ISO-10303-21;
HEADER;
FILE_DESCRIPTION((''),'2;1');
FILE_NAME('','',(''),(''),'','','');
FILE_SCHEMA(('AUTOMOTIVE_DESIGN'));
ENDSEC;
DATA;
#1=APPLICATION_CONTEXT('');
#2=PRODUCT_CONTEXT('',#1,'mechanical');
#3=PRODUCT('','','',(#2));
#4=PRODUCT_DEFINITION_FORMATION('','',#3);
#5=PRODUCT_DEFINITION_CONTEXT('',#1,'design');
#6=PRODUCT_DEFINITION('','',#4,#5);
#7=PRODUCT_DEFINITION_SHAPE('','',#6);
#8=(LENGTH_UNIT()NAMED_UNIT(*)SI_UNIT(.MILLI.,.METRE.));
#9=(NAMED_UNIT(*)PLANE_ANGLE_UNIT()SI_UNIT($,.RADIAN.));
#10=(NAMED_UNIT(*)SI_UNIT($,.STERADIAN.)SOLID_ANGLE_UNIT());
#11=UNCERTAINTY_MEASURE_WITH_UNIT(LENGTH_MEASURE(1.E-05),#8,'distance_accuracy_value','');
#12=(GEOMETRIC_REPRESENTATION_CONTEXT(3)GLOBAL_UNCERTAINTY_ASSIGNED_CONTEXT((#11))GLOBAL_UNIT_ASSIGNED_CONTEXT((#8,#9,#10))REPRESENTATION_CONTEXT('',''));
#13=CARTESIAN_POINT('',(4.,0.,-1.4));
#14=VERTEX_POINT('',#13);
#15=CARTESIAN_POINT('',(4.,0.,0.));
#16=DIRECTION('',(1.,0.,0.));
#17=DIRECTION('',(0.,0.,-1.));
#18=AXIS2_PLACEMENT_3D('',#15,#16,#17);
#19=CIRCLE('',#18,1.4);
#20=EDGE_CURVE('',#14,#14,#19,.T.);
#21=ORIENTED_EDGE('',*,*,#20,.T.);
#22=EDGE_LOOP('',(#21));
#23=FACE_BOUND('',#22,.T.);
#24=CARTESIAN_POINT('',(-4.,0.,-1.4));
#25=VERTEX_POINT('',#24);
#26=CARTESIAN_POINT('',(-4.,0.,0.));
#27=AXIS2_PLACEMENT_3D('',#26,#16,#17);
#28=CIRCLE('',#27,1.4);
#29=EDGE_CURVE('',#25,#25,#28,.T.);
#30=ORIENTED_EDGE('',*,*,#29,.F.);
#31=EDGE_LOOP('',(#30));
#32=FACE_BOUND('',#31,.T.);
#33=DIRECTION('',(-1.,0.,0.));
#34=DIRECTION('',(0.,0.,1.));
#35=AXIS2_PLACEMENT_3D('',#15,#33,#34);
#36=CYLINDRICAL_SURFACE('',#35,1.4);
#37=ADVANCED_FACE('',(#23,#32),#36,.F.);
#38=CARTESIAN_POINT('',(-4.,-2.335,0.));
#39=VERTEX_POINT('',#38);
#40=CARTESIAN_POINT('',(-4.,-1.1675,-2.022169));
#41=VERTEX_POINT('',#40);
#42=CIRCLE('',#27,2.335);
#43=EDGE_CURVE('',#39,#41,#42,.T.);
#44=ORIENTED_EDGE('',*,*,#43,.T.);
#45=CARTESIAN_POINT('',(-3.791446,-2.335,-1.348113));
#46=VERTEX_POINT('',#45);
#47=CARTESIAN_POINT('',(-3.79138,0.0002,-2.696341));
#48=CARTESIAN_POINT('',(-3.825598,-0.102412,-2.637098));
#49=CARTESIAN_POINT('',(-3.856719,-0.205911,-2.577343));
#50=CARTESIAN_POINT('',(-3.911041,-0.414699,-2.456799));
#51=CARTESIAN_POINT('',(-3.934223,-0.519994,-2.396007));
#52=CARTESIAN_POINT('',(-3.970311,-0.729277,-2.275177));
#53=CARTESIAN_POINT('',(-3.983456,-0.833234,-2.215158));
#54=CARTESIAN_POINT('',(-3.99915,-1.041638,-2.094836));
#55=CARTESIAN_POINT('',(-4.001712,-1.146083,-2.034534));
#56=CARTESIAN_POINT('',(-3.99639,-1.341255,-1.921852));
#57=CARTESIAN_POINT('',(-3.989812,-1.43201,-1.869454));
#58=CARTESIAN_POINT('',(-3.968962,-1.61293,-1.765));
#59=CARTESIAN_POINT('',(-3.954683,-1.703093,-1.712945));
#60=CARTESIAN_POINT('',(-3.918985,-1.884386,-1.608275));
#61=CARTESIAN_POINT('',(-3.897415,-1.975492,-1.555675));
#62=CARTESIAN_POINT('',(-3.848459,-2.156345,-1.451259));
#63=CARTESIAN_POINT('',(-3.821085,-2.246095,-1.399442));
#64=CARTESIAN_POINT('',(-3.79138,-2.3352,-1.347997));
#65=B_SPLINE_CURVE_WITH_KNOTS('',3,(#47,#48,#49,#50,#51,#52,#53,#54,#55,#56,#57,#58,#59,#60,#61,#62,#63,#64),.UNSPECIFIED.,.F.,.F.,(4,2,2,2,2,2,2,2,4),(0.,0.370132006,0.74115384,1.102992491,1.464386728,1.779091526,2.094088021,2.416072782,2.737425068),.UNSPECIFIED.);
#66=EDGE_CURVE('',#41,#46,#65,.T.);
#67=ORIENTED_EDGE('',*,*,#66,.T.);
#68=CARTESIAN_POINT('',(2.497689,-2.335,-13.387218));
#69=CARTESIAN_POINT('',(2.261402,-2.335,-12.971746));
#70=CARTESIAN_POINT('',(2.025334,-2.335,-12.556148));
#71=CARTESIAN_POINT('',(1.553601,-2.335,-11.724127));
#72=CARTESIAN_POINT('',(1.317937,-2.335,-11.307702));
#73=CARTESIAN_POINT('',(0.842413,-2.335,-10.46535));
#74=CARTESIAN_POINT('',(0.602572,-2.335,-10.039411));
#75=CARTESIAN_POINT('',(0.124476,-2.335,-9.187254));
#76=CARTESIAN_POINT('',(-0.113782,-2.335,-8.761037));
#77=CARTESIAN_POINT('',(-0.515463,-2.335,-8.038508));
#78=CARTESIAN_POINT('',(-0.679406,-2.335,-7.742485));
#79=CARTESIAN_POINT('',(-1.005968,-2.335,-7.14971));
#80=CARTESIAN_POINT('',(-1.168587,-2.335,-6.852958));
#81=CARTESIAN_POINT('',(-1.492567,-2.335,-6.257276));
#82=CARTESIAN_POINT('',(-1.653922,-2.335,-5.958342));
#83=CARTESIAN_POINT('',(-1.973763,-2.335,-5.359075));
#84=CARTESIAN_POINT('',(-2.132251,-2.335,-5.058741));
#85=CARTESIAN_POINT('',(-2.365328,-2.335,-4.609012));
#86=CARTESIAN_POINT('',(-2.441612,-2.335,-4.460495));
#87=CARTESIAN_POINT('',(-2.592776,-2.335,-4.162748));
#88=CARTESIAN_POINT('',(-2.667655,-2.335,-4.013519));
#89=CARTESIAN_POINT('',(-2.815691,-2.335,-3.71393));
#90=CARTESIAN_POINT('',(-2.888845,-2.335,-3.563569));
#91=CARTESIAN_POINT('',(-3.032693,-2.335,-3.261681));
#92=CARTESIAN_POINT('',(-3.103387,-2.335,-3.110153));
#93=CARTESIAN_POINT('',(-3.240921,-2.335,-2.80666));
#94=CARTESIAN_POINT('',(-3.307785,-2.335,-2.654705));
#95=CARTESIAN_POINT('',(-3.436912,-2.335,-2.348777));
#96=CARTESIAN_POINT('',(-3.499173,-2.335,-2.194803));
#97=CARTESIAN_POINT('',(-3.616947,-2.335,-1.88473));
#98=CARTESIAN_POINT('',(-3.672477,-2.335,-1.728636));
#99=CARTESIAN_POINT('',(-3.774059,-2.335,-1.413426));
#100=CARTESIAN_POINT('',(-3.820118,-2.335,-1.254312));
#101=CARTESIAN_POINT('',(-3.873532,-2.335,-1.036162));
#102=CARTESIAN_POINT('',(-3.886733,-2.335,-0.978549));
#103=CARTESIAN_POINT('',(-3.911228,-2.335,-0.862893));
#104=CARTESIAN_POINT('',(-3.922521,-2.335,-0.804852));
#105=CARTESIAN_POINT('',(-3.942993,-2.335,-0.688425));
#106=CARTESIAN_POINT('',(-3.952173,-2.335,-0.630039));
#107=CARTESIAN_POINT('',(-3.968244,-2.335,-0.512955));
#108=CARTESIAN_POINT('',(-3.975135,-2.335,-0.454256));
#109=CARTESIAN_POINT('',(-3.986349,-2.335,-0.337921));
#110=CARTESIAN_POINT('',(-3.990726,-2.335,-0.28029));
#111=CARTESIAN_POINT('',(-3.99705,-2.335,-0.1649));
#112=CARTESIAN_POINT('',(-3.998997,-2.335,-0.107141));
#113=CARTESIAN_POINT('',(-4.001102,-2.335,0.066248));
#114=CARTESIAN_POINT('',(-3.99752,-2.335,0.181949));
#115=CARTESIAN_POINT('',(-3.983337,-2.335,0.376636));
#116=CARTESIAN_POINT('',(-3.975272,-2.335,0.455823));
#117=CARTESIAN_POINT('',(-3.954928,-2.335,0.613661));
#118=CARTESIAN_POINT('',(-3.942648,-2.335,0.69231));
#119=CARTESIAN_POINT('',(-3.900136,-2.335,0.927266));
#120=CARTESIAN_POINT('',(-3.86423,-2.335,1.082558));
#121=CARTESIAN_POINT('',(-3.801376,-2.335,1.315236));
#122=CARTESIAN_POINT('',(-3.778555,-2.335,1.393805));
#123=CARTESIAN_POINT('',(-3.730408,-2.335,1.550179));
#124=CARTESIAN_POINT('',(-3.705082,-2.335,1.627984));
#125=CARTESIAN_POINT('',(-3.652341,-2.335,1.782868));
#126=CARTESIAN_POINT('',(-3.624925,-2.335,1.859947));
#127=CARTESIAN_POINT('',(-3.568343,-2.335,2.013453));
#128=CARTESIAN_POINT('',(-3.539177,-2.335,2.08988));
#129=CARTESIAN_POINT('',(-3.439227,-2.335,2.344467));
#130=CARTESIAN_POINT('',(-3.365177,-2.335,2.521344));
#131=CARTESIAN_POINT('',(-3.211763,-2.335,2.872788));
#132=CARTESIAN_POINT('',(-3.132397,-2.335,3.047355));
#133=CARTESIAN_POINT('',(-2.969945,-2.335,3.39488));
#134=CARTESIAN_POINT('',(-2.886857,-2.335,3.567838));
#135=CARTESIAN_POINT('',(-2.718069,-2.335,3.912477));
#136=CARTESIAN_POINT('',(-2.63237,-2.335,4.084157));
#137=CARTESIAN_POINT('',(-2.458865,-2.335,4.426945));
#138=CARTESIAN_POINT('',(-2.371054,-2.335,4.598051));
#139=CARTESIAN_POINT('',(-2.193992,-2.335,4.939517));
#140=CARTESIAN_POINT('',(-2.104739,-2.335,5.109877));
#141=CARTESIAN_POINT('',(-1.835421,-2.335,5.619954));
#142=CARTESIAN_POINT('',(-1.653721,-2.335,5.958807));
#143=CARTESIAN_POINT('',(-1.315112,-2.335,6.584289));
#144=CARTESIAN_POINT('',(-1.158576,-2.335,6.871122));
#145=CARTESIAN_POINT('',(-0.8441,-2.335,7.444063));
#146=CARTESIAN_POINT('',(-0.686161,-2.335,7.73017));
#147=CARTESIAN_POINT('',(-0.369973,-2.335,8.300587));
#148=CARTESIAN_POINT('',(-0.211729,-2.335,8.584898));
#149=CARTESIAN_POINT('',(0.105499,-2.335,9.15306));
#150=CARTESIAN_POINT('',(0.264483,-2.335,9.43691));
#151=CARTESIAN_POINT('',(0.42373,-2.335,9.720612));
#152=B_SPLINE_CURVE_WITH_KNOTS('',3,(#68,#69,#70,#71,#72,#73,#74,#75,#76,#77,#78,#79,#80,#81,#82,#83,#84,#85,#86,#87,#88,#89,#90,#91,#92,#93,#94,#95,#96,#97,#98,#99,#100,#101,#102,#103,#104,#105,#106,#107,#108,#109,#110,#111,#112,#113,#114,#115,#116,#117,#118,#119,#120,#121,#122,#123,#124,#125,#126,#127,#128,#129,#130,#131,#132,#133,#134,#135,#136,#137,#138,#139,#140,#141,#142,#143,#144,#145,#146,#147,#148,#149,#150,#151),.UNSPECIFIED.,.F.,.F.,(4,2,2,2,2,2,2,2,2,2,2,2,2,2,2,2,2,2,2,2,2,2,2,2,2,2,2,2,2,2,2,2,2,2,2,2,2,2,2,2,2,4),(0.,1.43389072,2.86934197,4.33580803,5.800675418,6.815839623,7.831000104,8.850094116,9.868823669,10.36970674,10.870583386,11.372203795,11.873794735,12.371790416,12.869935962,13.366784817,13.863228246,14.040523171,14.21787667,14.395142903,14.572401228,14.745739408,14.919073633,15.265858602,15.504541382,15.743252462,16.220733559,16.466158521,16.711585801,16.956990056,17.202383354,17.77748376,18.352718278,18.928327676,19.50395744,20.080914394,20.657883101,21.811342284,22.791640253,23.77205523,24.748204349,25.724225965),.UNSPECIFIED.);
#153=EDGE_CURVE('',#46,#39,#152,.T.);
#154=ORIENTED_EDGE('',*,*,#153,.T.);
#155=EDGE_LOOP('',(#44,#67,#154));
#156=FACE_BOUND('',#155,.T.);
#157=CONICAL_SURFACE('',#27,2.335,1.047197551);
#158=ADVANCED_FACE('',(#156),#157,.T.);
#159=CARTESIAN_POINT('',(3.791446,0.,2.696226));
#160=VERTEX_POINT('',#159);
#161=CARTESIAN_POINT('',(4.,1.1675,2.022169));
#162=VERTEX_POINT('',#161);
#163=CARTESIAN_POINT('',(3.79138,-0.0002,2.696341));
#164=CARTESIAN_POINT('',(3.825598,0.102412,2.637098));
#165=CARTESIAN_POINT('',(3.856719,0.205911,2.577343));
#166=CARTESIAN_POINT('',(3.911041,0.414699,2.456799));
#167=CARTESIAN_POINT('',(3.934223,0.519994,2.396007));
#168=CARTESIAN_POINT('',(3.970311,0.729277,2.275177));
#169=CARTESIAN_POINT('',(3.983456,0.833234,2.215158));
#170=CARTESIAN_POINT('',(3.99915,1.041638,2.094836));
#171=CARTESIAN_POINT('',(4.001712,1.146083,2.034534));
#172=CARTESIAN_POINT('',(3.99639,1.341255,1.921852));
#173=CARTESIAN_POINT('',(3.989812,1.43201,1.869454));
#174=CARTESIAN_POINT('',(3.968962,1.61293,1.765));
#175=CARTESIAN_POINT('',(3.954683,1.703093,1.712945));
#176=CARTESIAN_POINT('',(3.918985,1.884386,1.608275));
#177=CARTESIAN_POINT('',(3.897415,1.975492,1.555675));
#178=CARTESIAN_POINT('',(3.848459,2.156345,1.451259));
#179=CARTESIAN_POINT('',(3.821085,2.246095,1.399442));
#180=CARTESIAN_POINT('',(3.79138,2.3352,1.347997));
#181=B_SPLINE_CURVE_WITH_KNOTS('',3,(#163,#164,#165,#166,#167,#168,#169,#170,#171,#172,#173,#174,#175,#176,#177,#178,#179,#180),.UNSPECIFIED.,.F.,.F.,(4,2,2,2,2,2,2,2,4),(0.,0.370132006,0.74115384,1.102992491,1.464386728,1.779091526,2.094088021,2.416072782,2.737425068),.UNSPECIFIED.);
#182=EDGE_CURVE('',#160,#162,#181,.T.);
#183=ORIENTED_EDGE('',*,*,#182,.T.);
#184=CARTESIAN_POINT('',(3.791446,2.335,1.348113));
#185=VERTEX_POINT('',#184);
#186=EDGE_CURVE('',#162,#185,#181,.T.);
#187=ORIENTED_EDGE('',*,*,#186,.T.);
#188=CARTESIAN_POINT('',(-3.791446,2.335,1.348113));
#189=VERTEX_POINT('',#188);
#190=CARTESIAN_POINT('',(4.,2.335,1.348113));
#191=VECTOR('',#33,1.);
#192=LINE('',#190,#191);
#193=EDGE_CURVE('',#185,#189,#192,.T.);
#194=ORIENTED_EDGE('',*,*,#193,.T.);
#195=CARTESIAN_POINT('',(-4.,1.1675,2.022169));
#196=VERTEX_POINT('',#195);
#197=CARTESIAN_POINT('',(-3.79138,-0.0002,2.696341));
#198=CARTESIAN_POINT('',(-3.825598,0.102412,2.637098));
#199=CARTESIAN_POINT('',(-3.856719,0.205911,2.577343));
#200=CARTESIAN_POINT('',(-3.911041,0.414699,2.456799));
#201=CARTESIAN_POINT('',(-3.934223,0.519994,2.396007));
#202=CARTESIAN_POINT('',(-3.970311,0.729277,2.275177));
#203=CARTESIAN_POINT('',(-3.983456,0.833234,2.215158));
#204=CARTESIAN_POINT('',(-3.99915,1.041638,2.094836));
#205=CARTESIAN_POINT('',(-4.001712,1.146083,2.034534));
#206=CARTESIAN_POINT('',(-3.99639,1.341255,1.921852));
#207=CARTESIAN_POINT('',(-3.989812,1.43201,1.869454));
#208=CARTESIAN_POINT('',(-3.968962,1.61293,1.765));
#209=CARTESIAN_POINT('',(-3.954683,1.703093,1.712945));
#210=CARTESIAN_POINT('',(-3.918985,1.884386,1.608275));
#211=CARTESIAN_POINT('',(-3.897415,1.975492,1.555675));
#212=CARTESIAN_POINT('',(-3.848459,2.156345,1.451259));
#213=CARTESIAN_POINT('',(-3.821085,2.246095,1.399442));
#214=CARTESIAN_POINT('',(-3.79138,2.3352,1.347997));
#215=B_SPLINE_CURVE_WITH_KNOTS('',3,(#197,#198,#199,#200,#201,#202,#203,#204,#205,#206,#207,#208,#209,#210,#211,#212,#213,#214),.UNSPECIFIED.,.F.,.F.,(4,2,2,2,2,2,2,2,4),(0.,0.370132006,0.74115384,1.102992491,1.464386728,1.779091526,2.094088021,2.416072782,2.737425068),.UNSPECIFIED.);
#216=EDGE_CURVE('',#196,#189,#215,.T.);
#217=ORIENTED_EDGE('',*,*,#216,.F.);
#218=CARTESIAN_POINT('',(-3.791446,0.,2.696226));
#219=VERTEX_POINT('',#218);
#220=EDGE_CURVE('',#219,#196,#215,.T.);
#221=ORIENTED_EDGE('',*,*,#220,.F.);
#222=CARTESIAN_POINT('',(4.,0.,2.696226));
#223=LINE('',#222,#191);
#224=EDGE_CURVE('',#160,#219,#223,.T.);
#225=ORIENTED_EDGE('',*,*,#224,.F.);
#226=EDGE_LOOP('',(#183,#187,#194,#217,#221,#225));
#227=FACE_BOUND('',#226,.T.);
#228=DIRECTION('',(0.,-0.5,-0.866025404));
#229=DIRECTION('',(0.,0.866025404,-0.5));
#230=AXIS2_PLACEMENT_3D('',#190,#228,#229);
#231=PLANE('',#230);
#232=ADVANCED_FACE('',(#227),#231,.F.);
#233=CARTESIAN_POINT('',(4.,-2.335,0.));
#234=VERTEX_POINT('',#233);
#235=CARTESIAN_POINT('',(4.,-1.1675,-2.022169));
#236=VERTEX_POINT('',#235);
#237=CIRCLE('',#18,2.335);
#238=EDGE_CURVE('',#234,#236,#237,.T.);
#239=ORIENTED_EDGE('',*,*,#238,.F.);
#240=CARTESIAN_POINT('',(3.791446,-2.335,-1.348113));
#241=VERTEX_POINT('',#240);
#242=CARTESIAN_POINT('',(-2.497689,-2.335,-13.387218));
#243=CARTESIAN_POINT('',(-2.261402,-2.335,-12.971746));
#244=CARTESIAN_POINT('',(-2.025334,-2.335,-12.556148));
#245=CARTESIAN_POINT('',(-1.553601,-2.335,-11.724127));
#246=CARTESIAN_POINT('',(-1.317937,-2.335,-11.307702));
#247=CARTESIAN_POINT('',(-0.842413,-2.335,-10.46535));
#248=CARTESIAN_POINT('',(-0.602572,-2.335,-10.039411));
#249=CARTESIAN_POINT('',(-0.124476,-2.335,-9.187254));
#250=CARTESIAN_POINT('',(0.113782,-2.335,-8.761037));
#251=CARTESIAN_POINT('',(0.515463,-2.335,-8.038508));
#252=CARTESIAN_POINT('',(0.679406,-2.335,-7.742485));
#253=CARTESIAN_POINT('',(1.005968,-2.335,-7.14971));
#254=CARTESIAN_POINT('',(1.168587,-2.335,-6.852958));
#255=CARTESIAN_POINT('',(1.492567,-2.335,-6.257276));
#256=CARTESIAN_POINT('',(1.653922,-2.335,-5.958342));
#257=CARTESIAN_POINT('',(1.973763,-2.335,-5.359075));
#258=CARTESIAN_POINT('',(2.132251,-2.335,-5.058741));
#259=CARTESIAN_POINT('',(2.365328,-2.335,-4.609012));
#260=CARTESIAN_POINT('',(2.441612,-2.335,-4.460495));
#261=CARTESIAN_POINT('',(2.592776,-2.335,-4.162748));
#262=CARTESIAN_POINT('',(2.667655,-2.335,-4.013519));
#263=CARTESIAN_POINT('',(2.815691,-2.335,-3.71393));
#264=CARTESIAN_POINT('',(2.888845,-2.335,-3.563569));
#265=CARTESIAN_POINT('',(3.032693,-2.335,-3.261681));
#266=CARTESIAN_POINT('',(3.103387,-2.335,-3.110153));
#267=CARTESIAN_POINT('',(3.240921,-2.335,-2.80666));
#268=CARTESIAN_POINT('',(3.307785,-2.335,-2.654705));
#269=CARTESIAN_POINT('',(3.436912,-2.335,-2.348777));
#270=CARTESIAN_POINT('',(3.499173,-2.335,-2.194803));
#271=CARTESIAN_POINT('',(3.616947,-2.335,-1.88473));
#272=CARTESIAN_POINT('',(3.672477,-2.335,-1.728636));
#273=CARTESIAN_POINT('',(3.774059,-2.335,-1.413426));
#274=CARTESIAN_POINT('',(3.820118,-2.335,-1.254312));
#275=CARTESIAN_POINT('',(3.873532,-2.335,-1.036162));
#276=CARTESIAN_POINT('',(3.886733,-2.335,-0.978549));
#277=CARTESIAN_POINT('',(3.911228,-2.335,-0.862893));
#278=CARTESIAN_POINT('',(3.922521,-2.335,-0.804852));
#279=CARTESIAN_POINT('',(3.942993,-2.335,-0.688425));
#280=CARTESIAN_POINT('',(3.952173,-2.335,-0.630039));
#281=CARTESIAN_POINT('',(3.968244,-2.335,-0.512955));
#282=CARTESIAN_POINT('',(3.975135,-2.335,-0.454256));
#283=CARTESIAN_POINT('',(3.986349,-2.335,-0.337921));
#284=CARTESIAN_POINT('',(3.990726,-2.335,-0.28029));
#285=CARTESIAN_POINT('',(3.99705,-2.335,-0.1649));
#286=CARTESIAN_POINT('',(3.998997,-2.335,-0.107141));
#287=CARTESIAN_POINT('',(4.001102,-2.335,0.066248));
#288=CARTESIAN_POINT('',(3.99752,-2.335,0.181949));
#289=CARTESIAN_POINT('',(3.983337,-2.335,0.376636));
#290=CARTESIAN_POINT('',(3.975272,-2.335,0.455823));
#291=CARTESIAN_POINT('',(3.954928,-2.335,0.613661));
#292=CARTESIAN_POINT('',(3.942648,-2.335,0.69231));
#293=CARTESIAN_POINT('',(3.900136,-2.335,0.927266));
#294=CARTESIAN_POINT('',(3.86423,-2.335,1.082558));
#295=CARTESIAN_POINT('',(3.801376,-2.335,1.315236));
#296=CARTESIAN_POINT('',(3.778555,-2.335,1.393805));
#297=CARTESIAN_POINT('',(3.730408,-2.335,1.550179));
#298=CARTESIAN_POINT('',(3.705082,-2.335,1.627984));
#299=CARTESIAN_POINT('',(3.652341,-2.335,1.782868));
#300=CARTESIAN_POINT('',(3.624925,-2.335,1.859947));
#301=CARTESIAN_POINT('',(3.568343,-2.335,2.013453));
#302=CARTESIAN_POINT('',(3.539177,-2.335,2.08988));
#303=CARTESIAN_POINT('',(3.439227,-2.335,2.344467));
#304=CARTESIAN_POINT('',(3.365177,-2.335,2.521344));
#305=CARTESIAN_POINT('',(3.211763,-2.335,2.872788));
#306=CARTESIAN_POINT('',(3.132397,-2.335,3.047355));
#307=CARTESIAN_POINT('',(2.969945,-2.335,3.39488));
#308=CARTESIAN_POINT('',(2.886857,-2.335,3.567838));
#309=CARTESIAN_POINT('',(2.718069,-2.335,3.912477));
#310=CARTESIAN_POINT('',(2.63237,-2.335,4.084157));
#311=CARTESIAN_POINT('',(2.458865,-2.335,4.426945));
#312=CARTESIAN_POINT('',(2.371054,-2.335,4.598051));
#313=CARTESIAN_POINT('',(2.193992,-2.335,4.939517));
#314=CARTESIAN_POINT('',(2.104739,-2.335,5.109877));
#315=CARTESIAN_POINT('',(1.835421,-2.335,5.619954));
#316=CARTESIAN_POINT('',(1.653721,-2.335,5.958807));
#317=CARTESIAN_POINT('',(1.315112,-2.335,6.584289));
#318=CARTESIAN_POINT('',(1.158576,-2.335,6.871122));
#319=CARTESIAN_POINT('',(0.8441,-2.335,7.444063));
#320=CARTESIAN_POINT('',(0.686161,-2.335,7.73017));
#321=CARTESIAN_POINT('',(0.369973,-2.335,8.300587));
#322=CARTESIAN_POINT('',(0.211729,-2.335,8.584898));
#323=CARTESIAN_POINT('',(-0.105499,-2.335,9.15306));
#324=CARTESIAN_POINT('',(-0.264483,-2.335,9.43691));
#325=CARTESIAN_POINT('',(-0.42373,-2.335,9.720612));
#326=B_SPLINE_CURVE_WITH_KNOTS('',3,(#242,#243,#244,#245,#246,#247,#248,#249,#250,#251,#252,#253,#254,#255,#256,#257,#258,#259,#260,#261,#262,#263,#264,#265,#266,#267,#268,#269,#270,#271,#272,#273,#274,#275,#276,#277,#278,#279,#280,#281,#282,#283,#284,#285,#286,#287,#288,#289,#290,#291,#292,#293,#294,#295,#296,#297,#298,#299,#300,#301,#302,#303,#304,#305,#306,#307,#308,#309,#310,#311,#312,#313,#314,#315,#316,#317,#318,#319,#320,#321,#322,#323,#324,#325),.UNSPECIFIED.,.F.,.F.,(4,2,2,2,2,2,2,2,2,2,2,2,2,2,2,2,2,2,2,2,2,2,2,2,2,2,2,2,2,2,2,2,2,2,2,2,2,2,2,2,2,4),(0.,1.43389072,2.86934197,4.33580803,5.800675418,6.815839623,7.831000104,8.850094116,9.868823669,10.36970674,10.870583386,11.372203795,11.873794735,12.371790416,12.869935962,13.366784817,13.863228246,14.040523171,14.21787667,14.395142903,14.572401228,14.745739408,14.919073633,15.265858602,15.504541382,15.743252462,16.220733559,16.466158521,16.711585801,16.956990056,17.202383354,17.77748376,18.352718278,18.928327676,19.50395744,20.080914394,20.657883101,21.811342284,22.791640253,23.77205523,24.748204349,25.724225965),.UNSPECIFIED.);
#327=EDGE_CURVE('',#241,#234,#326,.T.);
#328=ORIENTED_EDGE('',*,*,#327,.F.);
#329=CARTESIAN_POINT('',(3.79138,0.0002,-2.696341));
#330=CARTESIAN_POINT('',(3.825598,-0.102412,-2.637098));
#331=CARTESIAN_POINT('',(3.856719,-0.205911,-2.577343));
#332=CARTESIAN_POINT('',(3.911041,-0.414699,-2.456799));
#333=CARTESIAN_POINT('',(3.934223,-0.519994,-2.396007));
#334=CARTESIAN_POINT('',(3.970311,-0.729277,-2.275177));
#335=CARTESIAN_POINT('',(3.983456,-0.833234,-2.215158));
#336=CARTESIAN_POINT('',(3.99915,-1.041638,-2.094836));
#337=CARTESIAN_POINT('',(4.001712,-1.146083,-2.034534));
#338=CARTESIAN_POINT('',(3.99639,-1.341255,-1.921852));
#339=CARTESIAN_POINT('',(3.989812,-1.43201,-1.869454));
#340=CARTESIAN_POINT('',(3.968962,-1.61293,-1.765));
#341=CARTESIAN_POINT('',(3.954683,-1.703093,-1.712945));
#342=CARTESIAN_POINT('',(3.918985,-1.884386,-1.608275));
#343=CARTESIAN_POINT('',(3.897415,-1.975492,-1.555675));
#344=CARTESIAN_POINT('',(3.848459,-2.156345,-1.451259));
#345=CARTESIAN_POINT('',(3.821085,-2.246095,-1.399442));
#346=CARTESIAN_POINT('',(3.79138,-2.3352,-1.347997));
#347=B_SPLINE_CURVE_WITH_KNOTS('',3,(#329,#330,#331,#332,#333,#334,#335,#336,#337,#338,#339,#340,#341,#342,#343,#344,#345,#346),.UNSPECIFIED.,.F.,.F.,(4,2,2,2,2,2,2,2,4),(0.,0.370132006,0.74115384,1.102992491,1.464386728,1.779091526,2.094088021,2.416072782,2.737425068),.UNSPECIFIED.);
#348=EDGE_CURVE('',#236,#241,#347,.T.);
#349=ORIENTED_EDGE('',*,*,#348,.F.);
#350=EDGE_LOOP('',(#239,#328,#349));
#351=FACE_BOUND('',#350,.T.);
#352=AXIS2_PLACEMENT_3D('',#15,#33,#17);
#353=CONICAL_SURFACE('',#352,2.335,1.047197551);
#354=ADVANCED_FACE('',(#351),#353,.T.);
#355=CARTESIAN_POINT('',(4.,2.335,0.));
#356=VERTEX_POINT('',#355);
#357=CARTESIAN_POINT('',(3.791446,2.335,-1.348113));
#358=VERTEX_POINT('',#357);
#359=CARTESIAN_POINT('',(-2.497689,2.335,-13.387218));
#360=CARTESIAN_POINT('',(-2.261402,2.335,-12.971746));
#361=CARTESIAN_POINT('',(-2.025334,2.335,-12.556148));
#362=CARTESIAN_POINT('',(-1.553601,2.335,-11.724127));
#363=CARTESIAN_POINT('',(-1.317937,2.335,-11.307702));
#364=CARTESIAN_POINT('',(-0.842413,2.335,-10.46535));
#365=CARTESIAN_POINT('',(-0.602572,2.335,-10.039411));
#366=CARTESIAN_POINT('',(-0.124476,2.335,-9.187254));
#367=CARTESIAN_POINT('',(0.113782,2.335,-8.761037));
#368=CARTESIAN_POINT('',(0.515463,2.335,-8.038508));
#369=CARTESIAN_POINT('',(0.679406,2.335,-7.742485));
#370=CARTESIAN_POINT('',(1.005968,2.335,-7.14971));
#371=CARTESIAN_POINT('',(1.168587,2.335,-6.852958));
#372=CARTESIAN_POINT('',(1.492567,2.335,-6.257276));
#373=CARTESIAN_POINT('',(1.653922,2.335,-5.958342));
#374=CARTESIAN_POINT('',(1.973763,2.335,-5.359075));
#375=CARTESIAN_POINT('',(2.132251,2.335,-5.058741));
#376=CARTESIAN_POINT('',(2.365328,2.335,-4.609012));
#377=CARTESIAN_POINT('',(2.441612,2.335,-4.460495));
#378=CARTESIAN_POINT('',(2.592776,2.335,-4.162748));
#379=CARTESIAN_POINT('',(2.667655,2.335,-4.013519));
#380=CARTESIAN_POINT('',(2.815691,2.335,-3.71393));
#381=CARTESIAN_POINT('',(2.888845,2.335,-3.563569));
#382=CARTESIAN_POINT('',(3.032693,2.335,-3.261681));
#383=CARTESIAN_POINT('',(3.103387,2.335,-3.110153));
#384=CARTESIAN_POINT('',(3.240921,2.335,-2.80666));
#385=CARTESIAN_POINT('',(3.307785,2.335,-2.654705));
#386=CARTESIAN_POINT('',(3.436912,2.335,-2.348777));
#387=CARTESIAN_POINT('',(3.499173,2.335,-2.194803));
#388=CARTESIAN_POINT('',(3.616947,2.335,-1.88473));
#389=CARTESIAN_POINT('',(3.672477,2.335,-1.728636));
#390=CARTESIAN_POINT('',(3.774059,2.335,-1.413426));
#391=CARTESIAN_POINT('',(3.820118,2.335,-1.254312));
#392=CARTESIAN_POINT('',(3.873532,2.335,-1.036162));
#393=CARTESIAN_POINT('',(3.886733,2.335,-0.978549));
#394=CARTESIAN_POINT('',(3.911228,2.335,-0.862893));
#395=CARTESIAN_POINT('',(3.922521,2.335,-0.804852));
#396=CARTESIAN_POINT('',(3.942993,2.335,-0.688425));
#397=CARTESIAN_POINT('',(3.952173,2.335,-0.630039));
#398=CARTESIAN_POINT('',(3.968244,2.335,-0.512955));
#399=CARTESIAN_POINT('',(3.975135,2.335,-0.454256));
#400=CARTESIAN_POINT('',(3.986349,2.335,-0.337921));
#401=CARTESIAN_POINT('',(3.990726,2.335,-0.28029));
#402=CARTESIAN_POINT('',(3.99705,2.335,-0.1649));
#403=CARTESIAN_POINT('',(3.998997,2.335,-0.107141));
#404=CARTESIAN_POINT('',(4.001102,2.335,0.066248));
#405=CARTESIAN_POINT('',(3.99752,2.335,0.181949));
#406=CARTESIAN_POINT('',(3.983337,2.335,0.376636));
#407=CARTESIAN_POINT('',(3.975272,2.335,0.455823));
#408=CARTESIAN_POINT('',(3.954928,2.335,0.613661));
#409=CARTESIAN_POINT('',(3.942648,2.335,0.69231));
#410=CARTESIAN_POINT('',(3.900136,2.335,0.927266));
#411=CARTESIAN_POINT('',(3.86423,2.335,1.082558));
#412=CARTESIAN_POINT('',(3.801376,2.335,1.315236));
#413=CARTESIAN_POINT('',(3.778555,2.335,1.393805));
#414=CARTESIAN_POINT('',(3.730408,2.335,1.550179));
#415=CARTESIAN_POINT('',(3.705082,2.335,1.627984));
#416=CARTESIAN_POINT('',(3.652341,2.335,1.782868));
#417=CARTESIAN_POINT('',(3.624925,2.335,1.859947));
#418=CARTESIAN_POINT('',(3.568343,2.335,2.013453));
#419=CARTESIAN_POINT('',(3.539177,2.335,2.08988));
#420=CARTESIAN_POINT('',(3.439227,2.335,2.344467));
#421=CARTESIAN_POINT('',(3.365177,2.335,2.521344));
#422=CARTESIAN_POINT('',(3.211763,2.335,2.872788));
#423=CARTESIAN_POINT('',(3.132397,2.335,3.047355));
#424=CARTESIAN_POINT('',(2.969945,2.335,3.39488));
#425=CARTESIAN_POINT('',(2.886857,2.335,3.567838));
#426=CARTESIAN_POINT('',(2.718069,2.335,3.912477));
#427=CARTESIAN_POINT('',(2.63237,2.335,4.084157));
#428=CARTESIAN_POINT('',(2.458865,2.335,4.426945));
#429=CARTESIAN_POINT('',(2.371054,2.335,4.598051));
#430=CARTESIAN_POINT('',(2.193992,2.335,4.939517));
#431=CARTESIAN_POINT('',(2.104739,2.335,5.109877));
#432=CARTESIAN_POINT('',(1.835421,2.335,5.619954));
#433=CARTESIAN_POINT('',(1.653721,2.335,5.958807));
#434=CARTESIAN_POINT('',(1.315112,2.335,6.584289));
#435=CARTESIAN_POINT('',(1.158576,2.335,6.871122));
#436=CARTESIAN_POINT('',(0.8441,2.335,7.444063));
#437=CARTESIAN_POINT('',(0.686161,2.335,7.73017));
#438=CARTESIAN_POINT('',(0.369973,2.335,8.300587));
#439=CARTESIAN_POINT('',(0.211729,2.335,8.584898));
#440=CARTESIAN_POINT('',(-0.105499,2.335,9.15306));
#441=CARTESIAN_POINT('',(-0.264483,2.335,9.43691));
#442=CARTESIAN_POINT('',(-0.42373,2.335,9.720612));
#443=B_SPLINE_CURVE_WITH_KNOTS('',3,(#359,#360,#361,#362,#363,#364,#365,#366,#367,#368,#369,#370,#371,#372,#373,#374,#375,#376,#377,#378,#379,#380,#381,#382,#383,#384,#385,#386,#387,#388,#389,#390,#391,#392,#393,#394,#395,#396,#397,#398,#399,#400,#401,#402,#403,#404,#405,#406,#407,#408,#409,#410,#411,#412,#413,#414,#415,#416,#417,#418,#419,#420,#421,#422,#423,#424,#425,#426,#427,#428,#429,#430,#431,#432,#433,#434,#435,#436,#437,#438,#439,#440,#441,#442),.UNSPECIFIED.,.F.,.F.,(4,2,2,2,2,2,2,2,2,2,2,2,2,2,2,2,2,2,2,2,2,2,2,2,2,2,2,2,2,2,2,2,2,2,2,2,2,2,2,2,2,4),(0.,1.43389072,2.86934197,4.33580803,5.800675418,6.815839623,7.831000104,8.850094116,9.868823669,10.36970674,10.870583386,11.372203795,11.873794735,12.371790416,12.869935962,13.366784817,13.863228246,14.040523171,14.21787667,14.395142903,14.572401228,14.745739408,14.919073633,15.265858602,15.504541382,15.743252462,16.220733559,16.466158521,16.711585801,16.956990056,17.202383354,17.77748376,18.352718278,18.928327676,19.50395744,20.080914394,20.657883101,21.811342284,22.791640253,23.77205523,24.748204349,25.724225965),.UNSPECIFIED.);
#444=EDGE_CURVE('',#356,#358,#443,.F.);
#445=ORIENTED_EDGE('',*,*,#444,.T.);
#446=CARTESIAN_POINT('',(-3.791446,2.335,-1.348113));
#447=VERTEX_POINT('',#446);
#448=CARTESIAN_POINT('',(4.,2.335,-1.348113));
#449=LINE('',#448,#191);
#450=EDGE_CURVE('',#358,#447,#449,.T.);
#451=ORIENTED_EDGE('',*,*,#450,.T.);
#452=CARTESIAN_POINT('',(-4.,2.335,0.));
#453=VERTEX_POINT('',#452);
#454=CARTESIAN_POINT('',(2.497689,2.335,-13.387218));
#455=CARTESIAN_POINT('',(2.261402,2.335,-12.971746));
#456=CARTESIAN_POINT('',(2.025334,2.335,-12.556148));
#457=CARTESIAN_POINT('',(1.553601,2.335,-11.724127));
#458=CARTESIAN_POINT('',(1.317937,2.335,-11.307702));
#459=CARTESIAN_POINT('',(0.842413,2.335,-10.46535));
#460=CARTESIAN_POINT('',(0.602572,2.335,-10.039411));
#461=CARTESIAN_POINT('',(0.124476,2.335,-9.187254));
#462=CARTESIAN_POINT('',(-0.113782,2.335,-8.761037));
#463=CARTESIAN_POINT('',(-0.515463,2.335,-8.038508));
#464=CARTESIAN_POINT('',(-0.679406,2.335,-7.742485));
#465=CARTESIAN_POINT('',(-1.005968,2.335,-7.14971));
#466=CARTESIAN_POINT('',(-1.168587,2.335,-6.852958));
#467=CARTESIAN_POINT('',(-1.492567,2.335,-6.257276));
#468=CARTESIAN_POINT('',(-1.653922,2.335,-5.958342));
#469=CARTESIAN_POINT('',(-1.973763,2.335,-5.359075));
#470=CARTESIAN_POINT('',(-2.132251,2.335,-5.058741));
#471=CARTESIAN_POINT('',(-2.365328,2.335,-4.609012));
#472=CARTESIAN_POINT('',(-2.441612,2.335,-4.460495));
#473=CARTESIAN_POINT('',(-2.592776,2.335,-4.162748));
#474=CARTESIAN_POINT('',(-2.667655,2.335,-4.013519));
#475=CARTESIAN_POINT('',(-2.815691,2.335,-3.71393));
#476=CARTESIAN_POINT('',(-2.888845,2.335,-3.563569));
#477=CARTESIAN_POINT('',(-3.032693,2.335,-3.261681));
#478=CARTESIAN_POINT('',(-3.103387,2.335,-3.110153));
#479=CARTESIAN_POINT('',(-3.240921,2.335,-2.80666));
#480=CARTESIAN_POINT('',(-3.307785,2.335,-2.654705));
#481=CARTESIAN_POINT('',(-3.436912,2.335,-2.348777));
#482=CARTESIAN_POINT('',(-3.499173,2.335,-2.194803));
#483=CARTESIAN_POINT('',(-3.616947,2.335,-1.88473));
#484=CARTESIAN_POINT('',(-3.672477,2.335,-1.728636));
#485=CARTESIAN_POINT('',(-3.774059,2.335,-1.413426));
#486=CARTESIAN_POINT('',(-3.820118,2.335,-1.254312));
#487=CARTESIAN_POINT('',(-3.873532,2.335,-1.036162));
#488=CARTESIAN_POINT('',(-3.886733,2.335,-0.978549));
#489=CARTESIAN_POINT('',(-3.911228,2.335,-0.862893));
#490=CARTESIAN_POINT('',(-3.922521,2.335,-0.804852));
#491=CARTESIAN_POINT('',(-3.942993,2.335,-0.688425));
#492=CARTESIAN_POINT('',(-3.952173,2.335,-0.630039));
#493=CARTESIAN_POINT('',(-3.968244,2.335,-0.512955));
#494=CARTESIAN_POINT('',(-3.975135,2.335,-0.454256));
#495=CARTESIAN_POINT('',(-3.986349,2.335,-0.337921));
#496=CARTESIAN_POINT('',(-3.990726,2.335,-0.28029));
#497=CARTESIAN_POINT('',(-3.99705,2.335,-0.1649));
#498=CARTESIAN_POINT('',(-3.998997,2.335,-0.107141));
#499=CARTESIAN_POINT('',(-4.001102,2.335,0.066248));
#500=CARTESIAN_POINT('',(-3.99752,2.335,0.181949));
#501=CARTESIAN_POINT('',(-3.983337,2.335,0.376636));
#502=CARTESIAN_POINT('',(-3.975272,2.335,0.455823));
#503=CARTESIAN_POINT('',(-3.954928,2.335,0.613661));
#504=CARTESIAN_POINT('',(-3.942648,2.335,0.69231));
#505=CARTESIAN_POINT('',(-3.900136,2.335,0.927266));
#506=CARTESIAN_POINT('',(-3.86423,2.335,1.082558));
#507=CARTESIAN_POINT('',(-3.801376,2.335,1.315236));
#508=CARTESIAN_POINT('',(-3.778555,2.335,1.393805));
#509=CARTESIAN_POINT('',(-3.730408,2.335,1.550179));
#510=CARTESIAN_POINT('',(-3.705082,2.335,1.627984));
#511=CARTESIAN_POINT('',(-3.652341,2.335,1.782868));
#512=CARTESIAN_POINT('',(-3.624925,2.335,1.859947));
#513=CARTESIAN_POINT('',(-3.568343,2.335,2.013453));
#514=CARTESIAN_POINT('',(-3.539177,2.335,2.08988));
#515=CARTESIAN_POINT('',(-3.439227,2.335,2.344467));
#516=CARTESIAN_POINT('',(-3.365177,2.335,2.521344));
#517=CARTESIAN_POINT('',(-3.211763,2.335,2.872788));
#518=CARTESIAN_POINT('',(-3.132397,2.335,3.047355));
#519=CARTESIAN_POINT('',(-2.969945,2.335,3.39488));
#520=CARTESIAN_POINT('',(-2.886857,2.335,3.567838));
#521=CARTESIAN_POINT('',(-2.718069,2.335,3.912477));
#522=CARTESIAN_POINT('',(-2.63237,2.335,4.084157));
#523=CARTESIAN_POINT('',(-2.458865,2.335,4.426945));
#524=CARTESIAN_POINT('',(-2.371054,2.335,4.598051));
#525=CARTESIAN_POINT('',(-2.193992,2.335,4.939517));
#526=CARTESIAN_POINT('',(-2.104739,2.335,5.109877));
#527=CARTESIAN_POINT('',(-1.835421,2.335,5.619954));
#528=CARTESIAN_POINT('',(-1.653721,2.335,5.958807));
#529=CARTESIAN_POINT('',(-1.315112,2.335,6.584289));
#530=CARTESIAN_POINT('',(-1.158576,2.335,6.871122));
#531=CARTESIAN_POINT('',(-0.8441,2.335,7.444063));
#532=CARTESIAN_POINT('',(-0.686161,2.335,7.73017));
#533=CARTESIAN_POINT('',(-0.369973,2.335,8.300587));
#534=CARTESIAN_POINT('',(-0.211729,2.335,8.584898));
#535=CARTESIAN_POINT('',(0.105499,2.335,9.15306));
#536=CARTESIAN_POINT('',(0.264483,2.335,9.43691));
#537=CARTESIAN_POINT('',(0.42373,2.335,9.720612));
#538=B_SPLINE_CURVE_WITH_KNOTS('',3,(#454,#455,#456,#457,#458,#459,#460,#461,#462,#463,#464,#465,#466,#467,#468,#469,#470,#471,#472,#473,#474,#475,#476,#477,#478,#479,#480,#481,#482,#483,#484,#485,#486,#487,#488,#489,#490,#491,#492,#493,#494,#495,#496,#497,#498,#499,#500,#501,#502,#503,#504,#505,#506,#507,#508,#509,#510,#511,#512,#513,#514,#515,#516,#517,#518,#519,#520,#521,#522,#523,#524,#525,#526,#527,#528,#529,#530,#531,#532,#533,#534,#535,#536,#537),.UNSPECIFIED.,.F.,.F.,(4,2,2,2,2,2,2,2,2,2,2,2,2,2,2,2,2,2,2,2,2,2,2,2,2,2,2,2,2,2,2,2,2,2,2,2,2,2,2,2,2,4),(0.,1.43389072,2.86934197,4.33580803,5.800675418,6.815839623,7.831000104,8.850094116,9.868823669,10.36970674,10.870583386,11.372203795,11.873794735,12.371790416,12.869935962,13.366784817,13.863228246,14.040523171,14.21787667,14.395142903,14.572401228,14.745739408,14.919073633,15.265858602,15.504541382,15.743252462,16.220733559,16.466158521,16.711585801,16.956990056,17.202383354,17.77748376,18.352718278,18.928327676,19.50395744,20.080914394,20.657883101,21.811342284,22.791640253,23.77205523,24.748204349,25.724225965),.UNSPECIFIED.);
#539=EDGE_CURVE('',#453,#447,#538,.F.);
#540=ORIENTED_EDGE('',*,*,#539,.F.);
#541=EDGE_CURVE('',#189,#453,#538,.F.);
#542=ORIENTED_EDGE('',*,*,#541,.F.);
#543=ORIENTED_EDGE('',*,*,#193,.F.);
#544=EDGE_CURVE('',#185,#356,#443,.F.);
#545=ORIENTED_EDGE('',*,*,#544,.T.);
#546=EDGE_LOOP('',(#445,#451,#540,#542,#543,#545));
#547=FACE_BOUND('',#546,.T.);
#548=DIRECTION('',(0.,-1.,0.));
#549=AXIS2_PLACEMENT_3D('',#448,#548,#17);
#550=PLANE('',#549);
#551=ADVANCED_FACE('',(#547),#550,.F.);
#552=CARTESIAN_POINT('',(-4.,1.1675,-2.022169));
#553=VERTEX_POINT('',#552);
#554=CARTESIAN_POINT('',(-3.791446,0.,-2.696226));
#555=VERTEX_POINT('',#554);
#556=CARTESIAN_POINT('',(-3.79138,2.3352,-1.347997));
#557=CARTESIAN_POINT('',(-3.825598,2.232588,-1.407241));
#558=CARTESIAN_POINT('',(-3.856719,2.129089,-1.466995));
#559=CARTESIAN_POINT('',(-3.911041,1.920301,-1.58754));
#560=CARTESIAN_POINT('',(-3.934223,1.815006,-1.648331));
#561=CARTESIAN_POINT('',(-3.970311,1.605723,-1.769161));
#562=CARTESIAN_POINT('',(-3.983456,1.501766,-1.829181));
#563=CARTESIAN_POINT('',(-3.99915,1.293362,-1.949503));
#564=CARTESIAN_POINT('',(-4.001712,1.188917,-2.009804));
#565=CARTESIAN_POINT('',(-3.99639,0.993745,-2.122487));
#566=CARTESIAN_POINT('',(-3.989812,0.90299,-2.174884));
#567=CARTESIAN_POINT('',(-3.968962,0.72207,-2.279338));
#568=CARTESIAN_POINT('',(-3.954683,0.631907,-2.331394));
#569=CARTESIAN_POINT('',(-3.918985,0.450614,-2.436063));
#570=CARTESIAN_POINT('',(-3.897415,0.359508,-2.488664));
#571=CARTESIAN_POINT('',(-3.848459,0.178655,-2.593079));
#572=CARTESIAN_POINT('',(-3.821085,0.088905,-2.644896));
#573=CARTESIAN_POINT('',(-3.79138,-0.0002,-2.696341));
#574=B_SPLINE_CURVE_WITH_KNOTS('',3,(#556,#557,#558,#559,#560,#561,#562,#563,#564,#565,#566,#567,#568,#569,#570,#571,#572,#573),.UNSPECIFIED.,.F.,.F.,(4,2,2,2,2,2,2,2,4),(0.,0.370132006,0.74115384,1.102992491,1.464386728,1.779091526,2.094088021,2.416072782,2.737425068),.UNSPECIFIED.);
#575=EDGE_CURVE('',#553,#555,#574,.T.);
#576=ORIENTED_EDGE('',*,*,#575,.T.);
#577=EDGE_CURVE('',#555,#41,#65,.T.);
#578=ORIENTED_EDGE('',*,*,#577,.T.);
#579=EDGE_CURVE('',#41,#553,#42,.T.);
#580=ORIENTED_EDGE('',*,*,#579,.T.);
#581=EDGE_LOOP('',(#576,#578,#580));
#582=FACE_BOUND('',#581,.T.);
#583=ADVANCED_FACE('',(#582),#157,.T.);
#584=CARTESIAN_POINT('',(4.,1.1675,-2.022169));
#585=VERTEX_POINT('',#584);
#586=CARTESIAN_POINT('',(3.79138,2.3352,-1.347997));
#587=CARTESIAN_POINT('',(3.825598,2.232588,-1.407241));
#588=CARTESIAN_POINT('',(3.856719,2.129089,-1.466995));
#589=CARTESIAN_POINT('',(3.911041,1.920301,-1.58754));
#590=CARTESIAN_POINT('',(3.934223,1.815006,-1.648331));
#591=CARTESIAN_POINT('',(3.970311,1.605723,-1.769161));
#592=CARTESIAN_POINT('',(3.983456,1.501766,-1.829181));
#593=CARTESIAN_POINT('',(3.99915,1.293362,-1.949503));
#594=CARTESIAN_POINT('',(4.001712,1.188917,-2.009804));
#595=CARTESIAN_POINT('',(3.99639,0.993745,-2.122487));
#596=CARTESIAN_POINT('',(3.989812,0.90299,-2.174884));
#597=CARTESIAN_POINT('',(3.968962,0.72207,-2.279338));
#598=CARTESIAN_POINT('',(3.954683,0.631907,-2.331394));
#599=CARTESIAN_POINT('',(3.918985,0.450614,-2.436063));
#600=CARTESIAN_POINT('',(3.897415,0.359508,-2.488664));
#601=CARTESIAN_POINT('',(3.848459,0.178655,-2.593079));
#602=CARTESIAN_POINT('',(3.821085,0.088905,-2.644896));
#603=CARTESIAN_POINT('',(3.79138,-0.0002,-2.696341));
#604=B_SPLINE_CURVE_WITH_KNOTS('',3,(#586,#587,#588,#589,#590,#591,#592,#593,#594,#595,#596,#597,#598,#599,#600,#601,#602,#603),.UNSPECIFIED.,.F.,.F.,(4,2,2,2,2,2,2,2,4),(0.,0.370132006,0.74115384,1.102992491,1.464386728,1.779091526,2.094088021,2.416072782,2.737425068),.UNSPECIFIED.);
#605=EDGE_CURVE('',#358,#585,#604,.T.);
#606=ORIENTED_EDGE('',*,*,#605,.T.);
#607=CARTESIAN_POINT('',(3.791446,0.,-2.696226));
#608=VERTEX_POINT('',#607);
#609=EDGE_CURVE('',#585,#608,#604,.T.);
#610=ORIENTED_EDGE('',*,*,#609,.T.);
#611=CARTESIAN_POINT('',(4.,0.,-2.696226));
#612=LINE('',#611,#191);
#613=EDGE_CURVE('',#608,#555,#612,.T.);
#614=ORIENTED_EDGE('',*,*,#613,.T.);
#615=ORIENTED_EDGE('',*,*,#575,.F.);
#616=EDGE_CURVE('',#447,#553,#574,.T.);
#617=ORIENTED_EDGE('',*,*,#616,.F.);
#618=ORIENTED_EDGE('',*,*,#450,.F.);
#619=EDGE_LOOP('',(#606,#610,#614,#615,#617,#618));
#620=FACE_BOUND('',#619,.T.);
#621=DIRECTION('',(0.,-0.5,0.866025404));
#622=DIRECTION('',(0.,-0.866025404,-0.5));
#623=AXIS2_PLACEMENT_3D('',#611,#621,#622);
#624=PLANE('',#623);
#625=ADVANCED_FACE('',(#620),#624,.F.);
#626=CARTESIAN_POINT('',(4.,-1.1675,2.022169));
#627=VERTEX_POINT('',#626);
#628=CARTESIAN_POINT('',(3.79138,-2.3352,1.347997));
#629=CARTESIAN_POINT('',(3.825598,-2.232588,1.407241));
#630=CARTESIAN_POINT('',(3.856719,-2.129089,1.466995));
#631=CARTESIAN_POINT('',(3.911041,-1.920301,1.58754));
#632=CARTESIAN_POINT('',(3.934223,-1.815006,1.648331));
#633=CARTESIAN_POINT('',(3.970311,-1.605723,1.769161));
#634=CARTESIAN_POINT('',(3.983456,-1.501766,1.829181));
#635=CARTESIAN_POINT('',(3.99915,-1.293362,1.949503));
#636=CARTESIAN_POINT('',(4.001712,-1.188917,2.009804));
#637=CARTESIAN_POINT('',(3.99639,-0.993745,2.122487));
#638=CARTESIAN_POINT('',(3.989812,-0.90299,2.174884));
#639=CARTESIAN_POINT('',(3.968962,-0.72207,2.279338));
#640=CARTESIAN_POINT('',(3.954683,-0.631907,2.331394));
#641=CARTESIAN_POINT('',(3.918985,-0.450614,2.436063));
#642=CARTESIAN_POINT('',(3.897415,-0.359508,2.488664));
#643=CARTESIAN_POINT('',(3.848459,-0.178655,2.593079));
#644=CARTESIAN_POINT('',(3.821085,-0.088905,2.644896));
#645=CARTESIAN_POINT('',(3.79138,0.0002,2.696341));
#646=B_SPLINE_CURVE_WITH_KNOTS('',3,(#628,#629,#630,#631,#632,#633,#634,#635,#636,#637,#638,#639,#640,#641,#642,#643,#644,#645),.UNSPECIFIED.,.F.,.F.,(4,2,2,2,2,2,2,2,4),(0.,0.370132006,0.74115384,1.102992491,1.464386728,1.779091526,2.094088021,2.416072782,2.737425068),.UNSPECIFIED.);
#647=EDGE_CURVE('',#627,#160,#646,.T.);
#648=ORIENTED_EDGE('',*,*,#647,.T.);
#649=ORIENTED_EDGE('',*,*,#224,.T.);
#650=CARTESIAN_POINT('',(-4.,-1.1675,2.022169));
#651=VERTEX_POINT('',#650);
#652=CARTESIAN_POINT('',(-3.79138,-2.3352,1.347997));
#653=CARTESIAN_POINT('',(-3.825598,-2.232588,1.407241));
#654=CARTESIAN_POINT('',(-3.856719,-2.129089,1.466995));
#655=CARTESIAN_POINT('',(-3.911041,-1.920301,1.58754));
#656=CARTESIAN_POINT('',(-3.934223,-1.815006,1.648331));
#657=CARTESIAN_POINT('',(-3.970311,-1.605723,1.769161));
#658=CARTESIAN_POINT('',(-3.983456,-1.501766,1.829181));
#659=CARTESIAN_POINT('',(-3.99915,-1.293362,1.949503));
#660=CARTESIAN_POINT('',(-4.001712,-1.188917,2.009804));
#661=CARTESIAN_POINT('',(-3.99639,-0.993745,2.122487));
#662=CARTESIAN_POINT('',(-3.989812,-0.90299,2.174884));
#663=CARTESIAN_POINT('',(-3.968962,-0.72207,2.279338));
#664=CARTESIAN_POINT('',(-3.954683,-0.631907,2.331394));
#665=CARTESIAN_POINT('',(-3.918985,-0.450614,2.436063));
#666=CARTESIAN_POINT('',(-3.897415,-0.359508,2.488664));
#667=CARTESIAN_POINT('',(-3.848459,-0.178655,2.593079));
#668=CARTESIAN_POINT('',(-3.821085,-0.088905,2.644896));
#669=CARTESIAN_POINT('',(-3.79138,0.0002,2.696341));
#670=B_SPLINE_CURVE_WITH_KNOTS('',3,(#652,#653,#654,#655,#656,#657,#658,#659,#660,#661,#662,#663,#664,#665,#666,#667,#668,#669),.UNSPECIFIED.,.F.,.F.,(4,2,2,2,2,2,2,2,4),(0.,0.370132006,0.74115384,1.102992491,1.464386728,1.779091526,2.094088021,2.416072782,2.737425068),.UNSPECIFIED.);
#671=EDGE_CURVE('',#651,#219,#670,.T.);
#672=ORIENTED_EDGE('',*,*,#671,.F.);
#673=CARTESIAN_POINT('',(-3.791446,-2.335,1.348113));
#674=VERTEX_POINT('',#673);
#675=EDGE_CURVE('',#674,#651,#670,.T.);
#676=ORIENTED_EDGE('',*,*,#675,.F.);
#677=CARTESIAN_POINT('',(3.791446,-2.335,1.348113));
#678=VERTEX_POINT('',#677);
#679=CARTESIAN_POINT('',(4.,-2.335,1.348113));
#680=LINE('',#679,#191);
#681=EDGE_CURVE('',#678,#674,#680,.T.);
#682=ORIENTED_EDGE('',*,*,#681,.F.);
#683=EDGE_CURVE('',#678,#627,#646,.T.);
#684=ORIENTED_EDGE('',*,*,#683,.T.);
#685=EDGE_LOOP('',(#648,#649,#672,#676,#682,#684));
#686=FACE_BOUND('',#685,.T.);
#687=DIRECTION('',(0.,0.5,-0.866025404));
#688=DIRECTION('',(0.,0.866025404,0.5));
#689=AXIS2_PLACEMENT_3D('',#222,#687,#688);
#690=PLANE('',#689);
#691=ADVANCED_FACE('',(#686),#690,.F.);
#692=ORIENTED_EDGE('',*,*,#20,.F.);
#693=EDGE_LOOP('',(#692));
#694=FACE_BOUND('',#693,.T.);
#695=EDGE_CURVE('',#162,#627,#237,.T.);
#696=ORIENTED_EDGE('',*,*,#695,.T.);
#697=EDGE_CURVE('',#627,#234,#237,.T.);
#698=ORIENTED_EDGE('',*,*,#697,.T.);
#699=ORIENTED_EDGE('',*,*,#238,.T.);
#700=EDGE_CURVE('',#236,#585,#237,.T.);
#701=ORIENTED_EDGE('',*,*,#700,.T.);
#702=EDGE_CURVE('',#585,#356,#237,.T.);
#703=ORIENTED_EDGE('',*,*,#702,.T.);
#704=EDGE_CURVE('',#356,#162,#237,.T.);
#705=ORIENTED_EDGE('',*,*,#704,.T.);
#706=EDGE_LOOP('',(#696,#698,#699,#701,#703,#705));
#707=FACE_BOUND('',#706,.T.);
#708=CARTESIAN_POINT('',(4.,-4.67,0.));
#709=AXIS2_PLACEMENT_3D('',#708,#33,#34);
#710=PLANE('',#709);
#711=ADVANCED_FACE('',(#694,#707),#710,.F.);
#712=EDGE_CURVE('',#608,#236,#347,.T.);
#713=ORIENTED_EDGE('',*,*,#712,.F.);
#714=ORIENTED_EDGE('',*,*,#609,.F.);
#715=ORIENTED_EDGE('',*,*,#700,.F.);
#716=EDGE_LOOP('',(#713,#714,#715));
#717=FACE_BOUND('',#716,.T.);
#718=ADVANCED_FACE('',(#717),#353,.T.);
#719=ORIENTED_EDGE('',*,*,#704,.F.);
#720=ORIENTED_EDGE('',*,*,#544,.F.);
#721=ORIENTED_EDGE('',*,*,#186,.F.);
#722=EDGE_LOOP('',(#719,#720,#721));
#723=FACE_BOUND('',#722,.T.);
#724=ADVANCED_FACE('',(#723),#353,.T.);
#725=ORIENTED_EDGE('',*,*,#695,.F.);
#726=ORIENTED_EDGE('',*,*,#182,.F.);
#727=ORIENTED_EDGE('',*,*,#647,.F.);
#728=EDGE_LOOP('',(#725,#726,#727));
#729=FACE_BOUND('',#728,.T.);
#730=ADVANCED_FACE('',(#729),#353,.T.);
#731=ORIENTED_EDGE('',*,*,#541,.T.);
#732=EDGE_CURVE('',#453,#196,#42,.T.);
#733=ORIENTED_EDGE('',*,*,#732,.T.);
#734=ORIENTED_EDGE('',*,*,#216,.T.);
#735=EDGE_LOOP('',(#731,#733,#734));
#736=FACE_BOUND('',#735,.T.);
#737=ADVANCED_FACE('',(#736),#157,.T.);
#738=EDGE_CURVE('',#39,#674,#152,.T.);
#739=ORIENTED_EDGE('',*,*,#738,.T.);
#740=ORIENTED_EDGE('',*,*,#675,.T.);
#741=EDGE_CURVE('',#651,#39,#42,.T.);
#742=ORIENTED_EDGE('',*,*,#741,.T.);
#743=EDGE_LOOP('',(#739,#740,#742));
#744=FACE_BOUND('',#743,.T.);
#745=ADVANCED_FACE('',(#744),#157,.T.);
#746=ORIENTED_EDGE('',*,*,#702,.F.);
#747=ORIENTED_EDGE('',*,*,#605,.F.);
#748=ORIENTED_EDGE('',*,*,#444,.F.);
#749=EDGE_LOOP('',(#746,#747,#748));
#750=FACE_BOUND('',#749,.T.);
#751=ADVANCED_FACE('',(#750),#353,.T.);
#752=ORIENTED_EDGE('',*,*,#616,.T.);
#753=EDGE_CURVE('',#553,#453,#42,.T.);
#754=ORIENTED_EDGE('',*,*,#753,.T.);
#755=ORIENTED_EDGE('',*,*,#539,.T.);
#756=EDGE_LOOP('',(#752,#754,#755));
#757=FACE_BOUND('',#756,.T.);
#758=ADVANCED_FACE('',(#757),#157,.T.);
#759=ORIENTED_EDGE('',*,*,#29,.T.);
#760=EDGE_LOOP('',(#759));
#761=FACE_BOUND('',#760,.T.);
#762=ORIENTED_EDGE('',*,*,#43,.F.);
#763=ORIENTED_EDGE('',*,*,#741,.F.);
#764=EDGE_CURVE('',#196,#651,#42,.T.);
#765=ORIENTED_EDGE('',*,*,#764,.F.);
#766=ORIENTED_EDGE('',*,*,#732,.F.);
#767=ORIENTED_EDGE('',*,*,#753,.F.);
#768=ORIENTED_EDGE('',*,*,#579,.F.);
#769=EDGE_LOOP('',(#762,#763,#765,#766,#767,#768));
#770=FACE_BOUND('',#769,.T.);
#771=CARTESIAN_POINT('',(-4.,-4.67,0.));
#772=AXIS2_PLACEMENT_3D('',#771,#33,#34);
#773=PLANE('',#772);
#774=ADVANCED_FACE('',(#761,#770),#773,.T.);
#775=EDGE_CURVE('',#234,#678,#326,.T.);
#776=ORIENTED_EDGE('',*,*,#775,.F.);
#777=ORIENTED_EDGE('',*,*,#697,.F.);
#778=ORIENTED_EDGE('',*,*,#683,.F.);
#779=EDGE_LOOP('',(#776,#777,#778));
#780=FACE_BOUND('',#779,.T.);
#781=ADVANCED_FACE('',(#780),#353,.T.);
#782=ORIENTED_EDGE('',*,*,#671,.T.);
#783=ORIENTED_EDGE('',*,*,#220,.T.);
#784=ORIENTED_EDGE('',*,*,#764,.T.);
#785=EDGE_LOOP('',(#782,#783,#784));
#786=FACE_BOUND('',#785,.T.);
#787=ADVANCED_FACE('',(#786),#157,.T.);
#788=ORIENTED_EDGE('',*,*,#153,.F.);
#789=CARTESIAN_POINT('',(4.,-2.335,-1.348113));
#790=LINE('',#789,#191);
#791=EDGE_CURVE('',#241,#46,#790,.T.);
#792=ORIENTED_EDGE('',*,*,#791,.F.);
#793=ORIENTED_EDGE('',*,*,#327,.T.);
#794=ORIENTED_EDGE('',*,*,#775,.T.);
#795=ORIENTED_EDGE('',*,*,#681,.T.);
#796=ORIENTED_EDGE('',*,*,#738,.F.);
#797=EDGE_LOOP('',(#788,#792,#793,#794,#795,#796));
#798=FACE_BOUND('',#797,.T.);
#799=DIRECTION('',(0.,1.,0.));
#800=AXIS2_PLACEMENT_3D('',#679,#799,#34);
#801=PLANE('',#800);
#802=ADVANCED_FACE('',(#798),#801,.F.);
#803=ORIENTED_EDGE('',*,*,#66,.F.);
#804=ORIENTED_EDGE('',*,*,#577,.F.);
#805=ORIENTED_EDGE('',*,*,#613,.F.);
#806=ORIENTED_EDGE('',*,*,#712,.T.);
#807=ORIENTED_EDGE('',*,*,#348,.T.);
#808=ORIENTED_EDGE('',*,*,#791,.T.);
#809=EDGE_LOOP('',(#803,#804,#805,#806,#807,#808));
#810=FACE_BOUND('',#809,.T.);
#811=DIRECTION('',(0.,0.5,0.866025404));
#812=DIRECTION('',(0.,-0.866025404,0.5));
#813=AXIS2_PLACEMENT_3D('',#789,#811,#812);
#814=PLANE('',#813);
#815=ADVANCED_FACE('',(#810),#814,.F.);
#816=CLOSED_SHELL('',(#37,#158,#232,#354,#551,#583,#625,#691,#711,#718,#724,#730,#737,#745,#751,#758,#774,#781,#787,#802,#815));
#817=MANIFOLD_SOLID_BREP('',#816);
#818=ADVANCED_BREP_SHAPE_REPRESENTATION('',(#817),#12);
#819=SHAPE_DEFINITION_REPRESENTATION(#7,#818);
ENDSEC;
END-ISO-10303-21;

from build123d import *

# Parameters (mm, degrees)
SKETCH1_R      = 1.4
EXTRUDE1_DEPTH = 4


# Read off the part's stored shape, not the designer's step: Cut-Extrude1
with BuildPart() as part:
    # Sketch1 → Extrude1 (new, symmetric)
    with BuildSketch(Plane(origin=(0, 0, 0), x_dir=(0, 0, -1), z_dir=(1, 0, 0))):
        Polygon((2.696225757, 0), (1.348112879, 2.335), (-1.348112879, 2.335), (-2.696225757, 0), (-1.348112879, -2.335), (1.348112879, -2.335), align=None)
        Circle(SKETCH1_R, mode=Mode.SUBTRACT)
    extrude(amount=EXTRUDE1_DEPTH, both=True)

    # Cut-Extrude1 outline → Cut-Extrude1 (revolve, cut)
    with BuildSketch(Plane.YX):
        Polygon((2.696225758, 4), (2.335, 4), (2.696225751, 3.791446215), align=None)
    cut_extrude1 = revolve(axis=Axis((0, 0, 0), (1, 0, 0)), mode=Mode.SUBTRACT)

    # Mirror1: Cut-Extrude1 across plane
    add(cut_extrude1.mirror(Plane(origin=(0, 0, 0), x_dir=(0, 0, 1), z_dir=(1, 0, 0))), mode=Mode.SUBTRACT)


solid = part.part
